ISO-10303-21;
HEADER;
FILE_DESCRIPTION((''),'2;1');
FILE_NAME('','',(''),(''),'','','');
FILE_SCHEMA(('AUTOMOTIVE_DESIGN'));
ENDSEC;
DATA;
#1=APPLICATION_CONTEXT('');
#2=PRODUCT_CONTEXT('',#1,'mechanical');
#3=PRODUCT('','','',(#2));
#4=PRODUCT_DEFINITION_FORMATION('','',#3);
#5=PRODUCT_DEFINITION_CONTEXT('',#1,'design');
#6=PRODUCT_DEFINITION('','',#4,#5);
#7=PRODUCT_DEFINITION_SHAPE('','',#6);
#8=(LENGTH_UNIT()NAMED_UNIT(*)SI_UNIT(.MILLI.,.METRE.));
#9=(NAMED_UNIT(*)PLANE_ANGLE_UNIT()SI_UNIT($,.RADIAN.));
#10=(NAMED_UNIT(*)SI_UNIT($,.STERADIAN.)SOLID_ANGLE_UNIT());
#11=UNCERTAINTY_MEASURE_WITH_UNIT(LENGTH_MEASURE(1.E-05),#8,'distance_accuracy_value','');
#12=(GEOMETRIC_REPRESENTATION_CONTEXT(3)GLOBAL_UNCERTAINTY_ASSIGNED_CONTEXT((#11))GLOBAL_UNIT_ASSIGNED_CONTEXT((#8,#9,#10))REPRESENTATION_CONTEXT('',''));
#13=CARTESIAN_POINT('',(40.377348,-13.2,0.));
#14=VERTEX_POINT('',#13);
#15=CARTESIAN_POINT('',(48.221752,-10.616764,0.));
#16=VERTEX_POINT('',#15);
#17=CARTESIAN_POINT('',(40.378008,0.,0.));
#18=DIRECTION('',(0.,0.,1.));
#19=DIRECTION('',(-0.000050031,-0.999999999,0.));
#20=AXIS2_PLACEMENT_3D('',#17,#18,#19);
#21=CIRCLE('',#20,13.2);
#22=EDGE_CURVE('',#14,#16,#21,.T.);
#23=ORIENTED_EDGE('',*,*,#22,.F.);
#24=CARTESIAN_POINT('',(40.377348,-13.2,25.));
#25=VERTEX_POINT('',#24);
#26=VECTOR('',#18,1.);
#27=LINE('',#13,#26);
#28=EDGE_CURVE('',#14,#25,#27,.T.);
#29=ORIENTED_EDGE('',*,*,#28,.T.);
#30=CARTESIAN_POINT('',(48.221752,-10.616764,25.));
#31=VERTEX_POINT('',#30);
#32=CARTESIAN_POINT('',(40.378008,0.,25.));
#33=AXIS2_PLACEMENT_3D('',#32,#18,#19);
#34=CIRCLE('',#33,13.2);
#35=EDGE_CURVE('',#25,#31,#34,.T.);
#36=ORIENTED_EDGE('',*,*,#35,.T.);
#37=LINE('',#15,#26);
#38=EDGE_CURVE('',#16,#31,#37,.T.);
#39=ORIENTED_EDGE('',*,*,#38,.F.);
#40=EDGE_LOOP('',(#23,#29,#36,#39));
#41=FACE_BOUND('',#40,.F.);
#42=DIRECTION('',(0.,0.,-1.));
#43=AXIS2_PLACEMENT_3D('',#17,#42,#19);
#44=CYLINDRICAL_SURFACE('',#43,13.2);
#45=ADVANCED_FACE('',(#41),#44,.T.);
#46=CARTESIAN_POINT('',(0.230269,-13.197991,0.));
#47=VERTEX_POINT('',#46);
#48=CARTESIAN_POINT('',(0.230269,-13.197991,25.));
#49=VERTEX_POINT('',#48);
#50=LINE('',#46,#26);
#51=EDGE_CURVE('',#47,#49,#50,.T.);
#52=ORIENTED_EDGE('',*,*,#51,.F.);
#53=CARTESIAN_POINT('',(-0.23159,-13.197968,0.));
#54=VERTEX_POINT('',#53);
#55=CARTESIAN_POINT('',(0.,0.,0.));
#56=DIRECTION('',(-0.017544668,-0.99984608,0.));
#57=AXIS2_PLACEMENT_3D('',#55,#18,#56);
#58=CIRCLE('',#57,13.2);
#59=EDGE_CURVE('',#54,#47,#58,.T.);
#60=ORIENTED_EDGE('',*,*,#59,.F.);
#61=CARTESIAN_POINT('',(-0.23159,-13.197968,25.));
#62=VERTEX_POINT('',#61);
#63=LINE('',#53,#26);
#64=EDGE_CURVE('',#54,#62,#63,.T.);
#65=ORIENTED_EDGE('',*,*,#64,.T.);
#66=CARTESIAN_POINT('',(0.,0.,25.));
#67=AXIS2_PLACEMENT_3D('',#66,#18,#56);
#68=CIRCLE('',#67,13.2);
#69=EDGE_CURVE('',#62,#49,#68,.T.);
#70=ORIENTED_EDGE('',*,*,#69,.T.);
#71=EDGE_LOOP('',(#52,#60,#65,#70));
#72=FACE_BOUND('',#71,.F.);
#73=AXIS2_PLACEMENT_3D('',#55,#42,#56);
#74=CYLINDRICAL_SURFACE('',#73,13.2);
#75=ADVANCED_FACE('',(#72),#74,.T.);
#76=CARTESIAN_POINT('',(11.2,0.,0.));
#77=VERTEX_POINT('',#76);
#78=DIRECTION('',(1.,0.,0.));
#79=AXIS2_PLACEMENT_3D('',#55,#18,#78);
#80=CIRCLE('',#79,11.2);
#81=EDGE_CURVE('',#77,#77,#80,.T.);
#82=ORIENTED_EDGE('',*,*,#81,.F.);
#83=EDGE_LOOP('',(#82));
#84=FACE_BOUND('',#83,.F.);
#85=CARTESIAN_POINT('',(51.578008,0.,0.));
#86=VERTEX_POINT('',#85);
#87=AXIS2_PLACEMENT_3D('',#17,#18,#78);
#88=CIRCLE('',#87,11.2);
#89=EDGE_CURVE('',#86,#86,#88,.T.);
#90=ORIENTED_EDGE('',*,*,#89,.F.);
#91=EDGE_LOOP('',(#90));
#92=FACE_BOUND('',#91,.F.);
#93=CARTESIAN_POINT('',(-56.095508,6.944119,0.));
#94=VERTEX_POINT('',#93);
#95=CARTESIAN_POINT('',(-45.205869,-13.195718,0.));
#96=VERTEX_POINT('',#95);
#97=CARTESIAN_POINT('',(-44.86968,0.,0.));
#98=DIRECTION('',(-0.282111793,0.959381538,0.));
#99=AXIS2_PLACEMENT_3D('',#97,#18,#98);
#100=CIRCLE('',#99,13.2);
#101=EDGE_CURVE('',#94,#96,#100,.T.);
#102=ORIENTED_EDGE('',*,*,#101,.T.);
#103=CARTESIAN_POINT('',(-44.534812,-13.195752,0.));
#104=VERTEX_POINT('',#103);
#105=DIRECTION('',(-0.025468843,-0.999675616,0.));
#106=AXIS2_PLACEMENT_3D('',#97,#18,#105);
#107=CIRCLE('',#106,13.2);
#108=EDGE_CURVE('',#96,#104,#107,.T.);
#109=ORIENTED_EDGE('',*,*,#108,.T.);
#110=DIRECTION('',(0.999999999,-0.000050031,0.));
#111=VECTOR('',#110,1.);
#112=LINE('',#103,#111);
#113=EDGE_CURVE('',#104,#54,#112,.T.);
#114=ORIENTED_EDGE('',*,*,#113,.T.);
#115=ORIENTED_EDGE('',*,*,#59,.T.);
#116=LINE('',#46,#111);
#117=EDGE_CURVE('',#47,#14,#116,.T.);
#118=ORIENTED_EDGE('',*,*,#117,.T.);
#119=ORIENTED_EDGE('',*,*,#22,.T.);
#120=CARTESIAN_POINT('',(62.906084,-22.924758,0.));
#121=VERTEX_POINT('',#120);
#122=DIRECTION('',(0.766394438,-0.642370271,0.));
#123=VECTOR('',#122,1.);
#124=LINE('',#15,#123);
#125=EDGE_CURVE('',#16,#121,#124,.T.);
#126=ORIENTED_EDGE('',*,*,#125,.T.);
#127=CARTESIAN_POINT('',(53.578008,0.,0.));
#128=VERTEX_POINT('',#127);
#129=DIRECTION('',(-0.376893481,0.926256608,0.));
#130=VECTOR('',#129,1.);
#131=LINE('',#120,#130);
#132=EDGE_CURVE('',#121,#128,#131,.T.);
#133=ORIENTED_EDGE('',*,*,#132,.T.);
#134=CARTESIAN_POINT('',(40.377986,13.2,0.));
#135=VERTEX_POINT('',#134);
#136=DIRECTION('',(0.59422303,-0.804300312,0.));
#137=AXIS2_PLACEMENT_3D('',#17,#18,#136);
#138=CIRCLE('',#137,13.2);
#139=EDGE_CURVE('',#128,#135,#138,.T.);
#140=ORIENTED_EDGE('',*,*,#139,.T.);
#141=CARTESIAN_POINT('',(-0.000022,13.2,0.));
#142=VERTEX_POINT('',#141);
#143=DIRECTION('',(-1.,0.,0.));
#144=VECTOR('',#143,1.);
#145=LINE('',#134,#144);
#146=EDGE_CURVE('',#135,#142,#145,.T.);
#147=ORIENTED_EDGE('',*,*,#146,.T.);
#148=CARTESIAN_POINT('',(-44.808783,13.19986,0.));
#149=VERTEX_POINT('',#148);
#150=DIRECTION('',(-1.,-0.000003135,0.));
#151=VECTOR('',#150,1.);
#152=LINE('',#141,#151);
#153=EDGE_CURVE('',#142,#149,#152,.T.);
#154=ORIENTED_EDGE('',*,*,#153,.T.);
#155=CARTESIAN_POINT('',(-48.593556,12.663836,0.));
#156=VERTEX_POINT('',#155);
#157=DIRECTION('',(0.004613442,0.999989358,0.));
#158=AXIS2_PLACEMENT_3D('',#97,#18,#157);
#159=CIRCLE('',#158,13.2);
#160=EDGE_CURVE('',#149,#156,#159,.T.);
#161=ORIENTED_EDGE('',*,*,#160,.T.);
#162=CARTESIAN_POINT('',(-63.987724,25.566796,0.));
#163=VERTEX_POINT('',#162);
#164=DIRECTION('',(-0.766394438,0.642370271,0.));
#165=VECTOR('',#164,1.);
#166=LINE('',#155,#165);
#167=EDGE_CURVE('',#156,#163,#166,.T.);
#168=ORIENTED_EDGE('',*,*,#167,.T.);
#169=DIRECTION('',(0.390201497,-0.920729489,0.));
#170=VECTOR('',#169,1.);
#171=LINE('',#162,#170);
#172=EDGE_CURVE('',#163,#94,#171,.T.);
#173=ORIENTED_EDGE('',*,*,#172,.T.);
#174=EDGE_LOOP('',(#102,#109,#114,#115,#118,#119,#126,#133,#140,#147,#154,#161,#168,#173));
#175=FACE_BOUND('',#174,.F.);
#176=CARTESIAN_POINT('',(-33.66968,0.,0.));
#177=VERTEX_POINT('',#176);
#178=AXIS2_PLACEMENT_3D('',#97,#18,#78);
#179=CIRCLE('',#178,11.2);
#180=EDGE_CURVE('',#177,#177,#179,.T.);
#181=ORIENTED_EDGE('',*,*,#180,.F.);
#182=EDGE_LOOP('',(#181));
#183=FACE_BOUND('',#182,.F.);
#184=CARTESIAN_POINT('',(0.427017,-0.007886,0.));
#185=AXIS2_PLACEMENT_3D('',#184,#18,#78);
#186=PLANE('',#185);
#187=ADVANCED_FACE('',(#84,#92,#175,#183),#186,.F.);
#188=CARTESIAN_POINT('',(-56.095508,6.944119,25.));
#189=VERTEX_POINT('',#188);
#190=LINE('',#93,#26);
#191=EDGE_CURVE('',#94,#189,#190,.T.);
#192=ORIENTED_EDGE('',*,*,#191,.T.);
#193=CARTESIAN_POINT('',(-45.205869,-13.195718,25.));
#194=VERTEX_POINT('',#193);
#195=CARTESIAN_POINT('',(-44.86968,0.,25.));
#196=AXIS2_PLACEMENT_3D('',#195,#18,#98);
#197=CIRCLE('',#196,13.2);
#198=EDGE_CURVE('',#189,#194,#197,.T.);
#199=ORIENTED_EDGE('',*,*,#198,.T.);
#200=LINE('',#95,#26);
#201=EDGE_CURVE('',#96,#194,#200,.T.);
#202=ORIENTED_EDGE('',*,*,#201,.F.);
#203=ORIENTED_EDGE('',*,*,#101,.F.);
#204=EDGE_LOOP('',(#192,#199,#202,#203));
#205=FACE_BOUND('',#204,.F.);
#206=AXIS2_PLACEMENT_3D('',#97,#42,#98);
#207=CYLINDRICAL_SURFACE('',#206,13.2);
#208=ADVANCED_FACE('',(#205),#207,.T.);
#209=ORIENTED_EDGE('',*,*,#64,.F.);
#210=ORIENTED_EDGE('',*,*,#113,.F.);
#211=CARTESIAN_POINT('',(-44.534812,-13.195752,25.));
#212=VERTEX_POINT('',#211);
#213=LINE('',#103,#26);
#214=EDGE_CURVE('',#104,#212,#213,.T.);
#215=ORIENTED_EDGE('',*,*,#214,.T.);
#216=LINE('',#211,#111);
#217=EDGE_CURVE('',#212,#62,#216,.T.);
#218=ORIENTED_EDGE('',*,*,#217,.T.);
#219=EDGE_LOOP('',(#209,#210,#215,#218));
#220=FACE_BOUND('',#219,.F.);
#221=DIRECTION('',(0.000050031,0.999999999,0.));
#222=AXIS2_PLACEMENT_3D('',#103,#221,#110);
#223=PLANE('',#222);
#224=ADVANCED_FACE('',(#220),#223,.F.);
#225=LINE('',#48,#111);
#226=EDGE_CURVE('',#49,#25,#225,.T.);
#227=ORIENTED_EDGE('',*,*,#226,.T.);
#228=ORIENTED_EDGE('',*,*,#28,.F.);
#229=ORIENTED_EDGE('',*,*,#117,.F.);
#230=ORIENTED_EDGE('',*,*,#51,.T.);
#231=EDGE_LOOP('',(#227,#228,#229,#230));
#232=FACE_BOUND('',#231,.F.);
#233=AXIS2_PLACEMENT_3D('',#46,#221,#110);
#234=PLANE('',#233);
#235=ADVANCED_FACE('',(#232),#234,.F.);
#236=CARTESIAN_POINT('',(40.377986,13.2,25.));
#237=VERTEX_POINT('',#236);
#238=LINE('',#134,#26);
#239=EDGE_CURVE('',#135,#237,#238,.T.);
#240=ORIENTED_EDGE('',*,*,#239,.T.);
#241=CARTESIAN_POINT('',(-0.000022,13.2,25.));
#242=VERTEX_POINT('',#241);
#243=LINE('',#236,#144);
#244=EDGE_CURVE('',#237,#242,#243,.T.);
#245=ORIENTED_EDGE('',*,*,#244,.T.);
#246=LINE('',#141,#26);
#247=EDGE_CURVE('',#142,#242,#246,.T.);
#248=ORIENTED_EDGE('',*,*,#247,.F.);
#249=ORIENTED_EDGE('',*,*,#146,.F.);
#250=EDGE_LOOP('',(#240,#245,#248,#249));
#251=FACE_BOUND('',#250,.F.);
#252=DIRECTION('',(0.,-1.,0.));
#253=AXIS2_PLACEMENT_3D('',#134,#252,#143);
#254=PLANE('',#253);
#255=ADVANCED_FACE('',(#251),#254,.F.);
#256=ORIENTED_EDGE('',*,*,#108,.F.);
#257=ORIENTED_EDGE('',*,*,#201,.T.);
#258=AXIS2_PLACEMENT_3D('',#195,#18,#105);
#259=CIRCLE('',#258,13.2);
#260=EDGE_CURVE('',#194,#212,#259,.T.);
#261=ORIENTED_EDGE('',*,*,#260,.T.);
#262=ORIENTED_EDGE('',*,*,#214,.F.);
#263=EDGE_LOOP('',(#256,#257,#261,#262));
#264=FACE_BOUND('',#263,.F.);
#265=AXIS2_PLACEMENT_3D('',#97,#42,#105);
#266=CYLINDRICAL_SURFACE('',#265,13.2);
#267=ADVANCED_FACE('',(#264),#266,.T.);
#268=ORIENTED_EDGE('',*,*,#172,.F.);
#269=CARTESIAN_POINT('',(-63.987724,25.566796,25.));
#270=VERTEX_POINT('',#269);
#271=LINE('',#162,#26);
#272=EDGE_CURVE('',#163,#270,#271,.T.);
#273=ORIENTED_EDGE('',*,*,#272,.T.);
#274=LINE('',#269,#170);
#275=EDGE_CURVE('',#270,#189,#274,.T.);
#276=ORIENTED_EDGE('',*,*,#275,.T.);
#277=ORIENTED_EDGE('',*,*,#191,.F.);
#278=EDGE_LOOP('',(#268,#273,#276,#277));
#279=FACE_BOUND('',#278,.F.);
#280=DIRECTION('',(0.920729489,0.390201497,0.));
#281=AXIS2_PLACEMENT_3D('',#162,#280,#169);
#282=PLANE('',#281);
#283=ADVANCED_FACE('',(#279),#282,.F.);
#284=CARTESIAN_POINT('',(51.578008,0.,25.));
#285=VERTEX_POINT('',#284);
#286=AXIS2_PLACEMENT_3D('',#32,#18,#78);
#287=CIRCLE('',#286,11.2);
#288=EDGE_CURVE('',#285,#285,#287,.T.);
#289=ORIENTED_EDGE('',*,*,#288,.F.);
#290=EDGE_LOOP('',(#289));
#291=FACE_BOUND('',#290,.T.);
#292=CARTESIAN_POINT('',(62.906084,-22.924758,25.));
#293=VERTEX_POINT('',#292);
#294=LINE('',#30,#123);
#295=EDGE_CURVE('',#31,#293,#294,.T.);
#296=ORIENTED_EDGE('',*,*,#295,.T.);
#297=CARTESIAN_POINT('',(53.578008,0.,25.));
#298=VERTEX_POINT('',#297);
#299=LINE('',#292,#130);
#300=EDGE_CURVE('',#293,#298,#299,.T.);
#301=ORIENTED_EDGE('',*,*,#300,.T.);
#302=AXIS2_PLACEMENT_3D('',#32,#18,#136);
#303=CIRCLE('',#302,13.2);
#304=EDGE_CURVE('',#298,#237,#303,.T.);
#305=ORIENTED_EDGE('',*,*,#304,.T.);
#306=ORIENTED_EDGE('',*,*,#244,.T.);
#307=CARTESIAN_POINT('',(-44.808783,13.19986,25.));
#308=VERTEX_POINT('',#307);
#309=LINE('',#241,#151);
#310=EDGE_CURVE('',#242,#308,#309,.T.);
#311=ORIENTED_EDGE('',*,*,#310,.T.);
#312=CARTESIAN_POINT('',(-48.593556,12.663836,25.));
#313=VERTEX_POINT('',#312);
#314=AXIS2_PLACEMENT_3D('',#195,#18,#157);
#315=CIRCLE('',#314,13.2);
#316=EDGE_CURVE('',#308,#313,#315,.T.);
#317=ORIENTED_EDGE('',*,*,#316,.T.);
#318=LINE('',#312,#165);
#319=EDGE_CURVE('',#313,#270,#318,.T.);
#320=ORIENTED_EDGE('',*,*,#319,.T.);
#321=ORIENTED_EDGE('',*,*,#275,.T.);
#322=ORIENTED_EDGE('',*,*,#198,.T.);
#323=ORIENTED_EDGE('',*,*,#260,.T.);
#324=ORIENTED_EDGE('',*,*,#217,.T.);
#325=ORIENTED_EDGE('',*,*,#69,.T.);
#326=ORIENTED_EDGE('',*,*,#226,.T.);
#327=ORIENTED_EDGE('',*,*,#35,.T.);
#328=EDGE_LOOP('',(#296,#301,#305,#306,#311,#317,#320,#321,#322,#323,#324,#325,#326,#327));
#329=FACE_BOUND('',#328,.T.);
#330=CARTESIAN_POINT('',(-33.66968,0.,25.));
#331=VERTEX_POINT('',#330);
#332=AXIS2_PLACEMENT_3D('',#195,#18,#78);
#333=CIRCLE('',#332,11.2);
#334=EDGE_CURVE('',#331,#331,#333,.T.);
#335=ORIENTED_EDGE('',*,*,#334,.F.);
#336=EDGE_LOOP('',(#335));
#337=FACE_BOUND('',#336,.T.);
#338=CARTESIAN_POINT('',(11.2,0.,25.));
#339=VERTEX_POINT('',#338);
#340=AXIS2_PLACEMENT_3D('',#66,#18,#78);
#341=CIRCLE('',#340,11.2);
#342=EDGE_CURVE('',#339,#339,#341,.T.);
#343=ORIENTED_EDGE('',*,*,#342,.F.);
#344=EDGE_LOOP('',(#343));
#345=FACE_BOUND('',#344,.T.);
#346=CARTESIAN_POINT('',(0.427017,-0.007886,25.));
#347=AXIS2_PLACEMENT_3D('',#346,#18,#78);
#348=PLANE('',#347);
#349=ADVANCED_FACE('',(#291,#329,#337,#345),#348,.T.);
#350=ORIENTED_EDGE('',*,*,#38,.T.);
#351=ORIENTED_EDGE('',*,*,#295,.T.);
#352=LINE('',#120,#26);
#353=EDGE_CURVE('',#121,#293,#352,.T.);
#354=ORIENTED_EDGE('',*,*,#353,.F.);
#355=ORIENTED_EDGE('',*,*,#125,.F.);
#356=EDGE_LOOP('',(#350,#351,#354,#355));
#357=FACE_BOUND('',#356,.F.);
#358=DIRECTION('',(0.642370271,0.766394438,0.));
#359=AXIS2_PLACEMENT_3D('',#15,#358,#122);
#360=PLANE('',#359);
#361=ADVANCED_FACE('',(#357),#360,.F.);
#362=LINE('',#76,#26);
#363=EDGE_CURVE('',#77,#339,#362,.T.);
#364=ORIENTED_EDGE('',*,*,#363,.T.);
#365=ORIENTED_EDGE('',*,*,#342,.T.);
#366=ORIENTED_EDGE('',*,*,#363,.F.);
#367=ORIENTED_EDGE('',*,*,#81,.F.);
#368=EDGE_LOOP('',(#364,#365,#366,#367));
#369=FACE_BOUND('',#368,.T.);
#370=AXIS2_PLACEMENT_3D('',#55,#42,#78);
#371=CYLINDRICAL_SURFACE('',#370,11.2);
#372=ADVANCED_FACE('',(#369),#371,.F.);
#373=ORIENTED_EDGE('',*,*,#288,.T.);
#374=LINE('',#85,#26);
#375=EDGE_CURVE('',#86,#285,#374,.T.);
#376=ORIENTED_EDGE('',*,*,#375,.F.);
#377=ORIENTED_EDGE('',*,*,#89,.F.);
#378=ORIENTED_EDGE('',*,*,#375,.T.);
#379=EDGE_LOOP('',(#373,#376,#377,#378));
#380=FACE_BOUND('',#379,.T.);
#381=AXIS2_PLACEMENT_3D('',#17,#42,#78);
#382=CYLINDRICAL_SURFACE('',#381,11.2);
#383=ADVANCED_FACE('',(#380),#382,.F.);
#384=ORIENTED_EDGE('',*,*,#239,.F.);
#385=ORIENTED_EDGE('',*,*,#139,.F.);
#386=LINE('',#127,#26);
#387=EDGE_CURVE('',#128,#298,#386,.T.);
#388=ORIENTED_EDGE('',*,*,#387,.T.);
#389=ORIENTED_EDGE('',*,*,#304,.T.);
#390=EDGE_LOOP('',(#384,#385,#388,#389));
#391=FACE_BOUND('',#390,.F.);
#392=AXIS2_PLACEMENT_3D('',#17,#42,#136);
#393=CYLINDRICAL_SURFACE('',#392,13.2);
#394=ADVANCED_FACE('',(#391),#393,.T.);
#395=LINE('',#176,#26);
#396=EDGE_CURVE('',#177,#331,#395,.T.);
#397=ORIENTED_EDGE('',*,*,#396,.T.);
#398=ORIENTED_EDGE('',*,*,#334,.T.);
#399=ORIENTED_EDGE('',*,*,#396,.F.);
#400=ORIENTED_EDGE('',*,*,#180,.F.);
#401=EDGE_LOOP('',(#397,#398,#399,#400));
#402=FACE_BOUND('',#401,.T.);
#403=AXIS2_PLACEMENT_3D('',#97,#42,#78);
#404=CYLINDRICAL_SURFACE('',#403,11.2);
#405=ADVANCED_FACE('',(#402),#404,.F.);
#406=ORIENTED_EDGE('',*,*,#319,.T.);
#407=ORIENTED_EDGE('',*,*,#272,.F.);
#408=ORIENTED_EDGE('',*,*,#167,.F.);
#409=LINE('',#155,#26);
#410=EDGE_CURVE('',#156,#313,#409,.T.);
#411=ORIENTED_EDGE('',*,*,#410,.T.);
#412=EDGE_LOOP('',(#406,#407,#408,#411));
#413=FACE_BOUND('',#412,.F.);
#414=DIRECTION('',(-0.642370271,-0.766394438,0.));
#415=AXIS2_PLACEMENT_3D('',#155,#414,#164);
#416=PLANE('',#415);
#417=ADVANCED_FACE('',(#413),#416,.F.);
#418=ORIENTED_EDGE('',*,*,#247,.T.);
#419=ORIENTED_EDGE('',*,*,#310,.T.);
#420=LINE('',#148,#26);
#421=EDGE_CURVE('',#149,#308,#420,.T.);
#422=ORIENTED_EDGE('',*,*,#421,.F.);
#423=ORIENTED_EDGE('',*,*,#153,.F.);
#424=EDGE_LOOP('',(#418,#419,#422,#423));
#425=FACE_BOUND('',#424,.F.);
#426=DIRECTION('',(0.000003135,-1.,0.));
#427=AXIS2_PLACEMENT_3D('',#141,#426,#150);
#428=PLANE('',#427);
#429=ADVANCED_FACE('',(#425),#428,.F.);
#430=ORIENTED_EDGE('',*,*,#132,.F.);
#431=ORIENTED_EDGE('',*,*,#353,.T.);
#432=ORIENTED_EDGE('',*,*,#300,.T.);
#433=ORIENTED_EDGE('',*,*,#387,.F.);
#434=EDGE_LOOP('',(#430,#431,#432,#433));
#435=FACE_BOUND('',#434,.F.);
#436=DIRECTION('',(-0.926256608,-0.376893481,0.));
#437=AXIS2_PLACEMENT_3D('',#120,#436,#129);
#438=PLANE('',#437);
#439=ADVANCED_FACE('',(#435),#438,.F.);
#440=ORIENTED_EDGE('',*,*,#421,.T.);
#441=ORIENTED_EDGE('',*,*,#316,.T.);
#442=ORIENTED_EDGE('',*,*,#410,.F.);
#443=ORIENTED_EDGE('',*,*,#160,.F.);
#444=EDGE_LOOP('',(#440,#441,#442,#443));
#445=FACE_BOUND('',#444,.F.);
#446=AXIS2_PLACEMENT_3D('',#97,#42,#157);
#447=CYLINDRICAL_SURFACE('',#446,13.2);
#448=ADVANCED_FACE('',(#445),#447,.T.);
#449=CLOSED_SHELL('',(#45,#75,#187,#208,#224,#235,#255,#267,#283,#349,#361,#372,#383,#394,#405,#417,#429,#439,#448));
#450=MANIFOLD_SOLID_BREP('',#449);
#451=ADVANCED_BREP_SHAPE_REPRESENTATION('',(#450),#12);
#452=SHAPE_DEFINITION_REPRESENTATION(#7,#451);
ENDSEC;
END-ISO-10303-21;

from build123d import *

# Parameters (mm, degrees)
F0_R     = 11.2
F1_DEPTH = 25


# Not quite as in the source:
# - ends of sketch curves that miss each other by under 0.0002 mm in the source are joined


with BuildPart() as f1:
    # F0 (on Top) → F1 (new body)
    with BuildSketch(Plane.XY):
        with BuildLine():
            ThreePointArc((0.2302689957, -13.1979913695), (9.4148699073, -9.2520389444), (13.2, 0))
            ThreePointArc((13.2, 0), (9.3338018159, 9.3338172074), (-2.1767e-05, 13.2))
            ThreePointArc((-2.1767e-05, 13.2), (-13.1994921512, 0.115788384), (-0.2315896221, -13.1979682621))
            Line((-0.2315896221, -13.1979682621), (0.2302689957, -13.1979913695))
        make_face()
        Circle(F0_R, mode=Mode.SUBTRACT)
        with BuildLine():
            ThreePointArc((-2.1767e-05, 13.2), (9.3338018159, 9.3338172074), (13.2, 0))
            ThreePointArc((13.2, 0), (9.4148699073, -9.2520389444), (0.2302689957, -13.1979913695))
            Line((0.2302689957, -13.1979913695), (40.3773476235, -13.1999999835))
            ThreePointArc((40.3773476235, -13.1999999835), (27.1780080417, 0.0003193237), (40.3779862708, 13.2))
            Line((40.3779862708, 13.2), (-2.1767e-05, 13.2))
        make_face()
        with BuildLine():
            ThreePointArc((-0.2315896221, -13.1979682621), (-13.1994921512, 0.115788384), (-2.1767e-05, 13.2))
            Line((-2.1767e-05, 13.2), (-44.8087825295, 13.1998595259))
            ThreePointArc((-44.8087825295, 13.1998595259), (-35.5143647291, 9.3122541296), (-31.6696799576, 0))
            ThreePointArc((-31.6696799576, 0), (-35.4182181161, -9.2146551242), (-44.534811633, -13.1957517105))
            Line((-44.534811633, -13.1957517105), (-0.2315896221, -13.1979682621))
        make_face()
        with BuildLine():
            ThreePointArc((-0.2315896221, -13.1979682621), (-0.0006604143, -13.1999999835), (0.2302689957, -13.1979913695))
            Line((0.2302689957, -13.1979913695), (-0.2315896221, -13.1979682621))
        make_face()
        with BuildLine():
            ThreePointArc((-31.6696799576, 0), (-35.5143647291, 9.3122541296), (-44.8087825295, 13.1998595259))
            ThreePointArc((-44.8087825295, 13.1998595259), (-46.7206749928, 13.0695760214), (-48.593555626, 12.6638363068))
            ThreePointArc((-48.593555626, 12.6638363068), (-52.8729419323, 10.4970375709), (-56.0955079711, 6.9441187643))
            ThreePointArc((-56.0955079711, 6.9441187643), (-56.4810242111, -6.2782708311), (-45.2058686841, -13.1957181366))
            Line((-45.2058686841, -13.1957181366), (-44.534811633, -13.1957517105))
            ThreePointArc((-44.534811633, -13.1957517105), (-35.4182181161, -9.2146551242), (-31.6696799576, 0))
        make_face()
        with Locations((-44.8696799576, 0)):
            Circle(F0_R, mode=Mode.SUBTRACT)
        with BuildLine():
            ThreePointArc((53.5780080378, 0), (49.7118098537, 9.3338172074), (40.3779862708, 13.2))
            ThreePointArc((40.3779862708, 13.2), (27.1780080417, 0.0003193237), (40.3773476235, -13.1999999835))
            ThreePointArc((40.3773476235, -13.1999999835), (44.5067810862, -12.5376725558), (48.2217520277, -10.6167641125))
            ThreePointArc((48.2217520277, -10.6167641125), (52.1631134821, -5.9456950533), (53.5780080378, 0))
        make_face()
        with Locations((40.3780080378, 0)):
            Circle(F0_R, mode=Mode.SUBTRACT)
        with BuildLine():
            ThreePointArc((-45.2058686841, -13.1957181366), (-44.8703403719, -13.1999999835), (-44.534811633, -13.1957517105))
            Line((-44.534811633, -13.1957517105), (-45.2058686841, -13.1957181366))
        make_face()
        with BuildLine():
            ThreePointArc((-56.0955079711, 6.9441187643), (-52.8729419323, 10.4970375709), (-48.593555626, 12.6638363068))
            Line((-48.593555626, 12.6638363068), (-63.987724483, 25.5667958409))
            Line((-63.987724483, 25.5667958409), (-56.0955079711, 6.9441187643))
        make_face()
        with BuildLine():
            Line((62.9060839376, -22.9247582743), (53.5780080378, 0))
            ThreePointArc((53.5780080378, 0), (52.1631134821, -5.9456950533), (48.2217520277, -10.6167641125))
            Line((48.2217520277, -10.6167641125), (62.9060839376, -22.9247582743))
        make_face()
    extrude(amount=F1_DEPTH)


solid = f1.part
